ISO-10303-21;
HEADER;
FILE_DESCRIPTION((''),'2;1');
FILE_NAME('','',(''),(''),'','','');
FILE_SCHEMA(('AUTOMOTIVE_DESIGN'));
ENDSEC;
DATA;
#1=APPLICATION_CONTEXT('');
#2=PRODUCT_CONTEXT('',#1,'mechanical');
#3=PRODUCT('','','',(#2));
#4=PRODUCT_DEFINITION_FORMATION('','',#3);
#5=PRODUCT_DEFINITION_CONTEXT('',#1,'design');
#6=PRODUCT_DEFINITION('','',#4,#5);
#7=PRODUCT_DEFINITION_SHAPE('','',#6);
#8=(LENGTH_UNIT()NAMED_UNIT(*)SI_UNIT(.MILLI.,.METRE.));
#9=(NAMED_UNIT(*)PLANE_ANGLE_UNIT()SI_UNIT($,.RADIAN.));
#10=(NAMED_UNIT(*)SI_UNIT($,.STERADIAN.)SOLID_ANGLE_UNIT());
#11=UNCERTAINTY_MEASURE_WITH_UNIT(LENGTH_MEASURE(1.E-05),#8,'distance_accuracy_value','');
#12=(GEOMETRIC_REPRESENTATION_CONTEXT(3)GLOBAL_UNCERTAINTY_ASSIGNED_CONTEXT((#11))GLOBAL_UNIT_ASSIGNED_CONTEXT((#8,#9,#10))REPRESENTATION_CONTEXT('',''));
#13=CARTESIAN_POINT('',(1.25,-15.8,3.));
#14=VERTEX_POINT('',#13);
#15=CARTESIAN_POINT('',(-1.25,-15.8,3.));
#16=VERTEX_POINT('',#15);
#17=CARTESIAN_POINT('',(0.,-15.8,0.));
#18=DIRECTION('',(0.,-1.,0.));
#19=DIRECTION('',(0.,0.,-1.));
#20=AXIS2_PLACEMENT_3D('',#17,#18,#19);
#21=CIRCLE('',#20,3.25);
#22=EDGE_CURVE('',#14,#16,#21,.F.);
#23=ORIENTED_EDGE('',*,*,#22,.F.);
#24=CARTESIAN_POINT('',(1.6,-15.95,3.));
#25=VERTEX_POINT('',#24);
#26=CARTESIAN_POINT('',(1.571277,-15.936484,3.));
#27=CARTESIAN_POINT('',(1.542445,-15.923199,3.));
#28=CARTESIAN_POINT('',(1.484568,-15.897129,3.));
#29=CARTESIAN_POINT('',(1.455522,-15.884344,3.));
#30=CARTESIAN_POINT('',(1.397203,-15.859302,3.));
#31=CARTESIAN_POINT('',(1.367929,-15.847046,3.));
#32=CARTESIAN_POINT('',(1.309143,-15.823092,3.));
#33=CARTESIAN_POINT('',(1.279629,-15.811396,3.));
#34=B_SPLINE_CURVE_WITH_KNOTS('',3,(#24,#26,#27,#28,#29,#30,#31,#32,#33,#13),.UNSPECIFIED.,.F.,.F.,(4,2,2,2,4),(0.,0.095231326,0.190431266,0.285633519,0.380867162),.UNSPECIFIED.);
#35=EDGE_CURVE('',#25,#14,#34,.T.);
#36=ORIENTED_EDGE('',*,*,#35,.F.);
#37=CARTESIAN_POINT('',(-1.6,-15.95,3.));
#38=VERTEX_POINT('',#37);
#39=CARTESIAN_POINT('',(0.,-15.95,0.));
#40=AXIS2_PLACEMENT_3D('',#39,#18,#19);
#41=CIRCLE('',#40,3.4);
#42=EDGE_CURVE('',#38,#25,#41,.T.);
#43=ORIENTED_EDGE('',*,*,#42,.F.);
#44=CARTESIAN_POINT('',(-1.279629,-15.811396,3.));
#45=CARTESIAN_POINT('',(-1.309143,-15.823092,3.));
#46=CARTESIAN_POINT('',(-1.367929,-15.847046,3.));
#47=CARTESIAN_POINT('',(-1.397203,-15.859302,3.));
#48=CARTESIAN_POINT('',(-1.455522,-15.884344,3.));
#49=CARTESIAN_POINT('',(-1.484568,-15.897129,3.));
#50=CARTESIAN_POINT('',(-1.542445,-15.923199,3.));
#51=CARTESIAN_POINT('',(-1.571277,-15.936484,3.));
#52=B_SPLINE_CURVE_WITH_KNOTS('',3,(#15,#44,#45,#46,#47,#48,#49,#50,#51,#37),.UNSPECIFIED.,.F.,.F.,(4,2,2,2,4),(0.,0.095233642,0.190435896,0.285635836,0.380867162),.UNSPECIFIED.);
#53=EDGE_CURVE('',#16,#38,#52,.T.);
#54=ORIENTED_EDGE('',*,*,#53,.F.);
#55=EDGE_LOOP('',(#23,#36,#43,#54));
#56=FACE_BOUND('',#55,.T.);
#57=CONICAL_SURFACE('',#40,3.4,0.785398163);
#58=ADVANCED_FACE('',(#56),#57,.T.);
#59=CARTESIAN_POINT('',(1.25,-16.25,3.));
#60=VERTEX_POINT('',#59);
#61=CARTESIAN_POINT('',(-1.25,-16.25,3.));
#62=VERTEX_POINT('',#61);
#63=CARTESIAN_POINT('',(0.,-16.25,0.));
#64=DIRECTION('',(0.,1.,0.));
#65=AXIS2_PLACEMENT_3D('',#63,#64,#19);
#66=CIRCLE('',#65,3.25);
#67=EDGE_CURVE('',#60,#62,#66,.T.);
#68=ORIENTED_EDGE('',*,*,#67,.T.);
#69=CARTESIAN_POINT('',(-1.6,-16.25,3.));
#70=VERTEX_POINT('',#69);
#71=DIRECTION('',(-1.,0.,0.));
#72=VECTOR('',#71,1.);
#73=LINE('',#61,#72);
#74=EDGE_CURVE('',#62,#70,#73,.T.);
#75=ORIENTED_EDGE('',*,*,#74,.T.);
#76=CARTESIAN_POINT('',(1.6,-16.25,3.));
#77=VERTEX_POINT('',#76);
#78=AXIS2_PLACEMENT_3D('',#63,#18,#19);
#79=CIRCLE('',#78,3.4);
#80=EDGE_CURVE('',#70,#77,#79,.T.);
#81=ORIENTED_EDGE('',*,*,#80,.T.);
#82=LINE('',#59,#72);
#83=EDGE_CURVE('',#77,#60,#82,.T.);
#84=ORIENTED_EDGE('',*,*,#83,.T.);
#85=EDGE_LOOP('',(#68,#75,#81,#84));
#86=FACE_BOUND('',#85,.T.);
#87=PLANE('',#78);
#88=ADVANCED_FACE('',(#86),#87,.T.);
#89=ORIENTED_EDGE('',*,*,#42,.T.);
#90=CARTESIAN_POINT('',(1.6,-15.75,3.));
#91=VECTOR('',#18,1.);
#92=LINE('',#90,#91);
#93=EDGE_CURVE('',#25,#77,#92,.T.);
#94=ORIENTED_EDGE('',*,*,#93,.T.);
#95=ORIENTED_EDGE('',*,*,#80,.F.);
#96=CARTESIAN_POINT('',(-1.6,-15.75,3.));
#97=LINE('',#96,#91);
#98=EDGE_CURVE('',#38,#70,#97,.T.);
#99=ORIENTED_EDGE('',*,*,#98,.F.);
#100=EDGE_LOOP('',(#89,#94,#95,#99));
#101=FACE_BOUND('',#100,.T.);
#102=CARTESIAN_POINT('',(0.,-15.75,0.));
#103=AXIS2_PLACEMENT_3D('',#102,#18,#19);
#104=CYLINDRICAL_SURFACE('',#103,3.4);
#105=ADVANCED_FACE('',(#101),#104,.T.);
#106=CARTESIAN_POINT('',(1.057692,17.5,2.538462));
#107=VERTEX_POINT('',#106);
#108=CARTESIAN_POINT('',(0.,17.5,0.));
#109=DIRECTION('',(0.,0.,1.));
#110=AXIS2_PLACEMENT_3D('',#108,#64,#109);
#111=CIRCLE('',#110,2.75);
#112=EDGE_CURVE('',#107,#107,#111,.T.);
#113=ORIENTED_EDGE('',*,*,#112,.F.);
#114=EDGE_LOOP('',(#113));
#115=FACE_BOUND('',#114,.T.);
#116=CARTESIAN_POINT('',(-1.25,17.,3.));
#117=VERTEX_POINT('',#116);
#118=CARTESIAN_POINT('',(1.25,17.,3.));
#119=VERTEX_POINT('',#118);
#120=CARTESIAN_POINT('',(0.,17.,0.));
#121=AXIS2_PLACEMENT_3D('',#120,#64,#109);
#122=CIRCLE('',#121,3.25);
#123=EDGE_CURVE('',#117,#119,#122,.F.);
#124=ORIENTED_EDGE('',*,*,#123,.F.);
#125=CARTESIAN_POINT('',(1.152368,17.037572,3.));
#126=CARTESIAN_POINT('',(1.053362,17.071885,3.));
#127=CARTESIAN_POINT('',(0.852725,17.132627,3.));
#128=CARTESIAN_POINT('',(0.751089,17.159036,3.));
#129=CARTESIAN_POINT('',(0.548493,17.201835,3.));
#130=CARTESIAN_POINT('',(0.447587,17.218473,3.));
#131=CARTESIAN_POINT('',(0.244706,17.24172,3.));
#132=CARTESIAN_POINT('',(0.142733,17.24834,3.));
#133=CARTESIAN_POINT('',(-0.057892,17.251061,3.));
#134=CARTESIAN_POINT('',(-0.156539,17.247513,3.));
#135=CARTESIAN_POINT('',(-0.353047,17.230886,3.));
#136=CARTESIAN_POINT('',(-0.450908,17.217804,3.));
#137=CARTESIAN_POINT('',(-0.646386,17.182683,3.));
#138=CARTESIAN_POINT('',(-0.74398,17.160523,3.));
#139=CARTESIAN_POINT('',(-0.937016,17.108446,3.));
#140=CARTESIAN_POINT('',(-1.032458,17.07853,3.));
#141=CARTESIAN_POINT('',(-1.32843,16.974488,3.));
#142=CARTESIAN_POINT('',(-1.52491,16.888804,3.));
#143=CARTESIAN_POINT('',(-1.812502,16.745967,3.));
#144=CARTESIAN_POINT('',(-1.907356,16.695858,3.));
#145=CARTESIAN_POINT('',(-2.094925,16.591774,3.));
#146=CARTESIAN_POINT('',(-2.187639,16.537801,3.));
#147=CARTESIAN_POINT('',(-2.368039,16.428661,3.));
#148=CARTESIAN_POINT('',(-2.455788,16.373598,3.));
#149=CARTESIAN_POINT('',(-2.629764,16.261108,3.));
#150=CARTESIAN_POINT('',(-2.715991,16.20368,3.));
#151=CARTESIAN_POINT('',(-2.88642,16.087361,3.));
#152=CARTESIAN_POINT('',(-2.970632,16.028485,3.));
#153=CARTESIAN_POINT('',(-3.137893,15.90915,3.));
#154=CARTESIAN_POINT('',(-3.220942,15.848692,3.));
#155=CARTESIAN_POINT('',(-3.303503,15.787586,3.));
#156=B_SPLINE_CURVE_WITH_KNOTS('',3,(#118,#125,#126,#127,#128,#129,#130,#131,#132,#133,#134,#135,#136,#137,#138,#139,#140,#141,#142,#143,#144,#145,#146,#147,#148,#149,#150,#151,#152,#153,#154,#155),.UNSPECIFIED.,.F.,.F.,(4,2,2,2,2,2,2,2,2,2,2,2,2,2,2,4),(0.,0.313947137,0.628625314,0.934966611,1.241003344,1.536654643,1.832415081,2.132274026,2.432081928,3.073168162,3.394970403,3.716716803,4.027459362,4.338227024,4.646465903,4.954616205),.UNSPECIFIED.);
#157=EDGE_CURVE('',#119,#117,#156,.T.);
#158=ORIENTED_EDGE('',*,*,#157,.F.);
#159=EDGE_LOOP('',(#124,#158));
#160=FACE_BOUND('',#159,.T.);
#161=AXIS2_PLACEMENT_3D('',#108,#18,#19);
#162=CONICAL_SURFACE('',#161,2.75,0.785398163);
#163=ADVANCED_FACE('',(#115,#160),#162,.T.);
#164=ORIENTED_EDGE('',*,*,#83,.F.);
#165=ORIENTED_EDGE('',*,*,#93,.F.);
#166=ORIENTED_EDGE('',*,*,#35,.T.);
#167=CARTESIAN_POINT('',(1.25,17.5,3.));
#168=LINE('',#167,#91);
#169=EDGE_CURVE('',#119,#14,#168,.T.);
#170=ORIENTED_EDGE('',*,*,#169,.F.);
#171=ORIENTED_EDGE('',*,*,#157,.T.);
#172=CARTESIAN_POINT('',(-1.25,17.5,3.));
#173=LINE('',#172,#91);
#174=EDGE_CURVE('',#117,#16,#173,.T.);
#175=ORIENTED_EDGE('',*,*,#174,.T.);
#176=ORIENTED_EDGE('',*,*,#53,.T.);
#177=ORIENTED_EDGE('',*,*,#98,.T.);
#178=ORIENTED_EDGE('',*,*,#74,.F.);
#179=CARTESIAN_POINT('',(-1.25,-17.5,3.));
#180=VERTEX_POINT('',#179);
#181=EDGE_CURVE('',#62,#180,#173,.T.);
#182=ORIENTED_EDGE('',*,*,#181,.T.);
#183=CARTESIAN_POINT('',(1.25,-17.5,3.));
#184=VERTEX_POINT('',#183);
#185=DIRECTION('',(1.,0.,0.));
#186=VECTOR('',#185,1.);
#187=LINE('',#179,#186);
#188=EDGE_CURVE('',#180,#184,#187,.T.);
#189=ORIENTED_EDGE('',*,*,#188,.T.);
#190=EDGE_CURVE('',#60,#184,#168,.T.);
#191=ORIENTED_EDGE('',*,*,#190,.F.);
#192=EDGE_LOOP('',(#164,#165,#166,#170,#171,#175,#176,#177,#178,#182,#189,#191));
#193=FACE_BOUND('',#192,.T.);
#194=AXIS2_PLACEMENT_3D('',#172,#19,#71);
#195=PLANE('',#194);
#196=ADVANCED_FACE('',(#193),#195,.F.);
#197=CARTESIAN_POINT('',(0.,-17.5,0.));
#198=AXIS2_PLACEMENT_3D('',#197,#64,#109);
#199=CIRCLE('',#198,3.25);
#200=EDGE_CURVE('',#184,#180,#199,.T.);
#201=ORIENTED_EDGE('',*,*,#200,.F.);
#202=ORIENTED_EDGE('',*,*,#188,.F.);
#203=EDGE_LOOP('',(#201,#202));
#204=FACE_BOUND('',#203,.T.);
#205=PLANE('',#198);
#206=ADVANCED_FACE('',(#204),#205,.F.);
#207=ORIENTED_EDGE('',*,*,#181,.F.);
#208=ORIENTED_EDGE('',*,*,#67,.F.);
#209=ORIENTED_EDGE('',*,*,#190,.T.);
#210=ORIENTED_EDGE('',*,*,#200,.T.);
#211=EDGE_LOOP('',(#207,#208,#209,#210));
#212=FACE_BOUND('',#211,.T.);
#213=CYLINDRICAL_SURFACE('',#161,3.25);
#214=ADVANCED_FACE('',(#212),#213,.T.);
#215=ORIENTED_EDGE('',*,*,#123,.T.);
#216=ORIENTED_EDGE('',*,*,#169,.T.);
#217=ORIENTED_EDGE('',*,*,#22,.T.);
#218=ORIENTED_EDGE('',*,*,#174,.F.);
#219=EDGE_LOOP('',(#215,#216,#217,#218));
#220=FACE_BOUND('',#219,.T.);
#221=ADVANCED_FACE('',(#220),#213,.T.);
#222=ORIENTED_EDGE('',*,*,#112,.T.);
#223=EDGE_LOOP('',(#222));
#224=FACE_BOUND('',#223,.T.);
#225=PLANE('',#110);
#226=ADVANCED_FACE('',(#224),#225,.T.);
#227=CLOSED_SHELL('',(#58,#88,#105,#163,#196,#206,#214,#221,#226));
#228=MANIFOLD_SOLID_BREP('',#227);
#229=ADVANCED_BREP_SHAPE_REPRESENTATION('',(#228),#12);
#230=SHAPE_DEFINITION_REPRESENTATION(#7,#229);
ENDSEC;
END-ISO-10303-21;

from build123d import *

# Parameters (mm, degrees)
BOSS_EXTRUDE1_DEPTH = 17.5
BOSS_EXTRUDE2_START = -1.75
BOSS_EXTRUDE2_DEPTH = 0.5
CHAMFER1_SIZE       = 0.2


with BuildPart() as part:
    # Sketch1 → Boss-Extrude1 (new, symmetric)
    with BuildSketch(Plane(origin=(0, 0, 0), x_dir=(1, 0, 0), z_dir=(0, 1, 0))):
        with BuildLine():
            Line((-1.25, -3), (1.25, -3))
            ThreePointArc((1.25, -3), (0, 3.25), (-1.25, -3))
        make_face()
    extrude(amount=BOSS_EXTRUDE1_DEPTH, both=True)

    # Sketch2 → Boss-Extrude2 (add)
    with BuildSketch(Plane.XZ.offset(17.5).offset(BOSS_EXTRUDE2_START)):
        with BuildLine():
            Line((-1.25, 3), (-1.6, 3))
            ThreePointArc((-1.6, 3), (0, -3.4), (1.6, 3))
            Line((1.6, 3), (1.25, 3))
            ThreePointArc((1.25, 3), (0, -3.25), (-1.25, 3))
        make_face()
    extrude(amount=BOSS_EXTRUDE2_DEPTH)

    # Chamfer1
    # the kernel refuses this chamfer: 0.2 mm, written as the material it takes off along each edge
    with BuildSketch(Plane(origin=(0, -15.75, 0), x_dir=(-0.3315887986155938, 0, 0.9434240131736458), z_dir=(0.9434240131736458, 0, 0.3315887986155938))) as chamfer1_piece_1_section:
        Polygon((3.4, CHAMFER1_SIZE), (3.4 - CHAMFER1_SIZE, 0), (3.4, 0), align=None)
    chamfer1_piece_1 = revolve(axis=Axis((0, -15.75, 0), (0, -1, 0)), revolution_arc=321.269525005, mode=Mode.PRIVATE)
    chamfer1_piece_1 = chamfer1_piece_1 - Plane(origin=(0, -15.75, 0), x_dir=(0.38461538461538497, 0, 0.923076923076923), z_dir=(0, 1, 0)) * Cylinder(3.25, 14, mode=Mode.PRIVATE)
    add(chamfer1_piece_1, mode=Mode.SUBTRACT)

    # Chamfer2: read off the stored shape, not the designer's step
    # Chamfer2 outline → Chamfer2 (revolve, cut)
    with BuildSketch(Plane.XY):
        Polygon((3.25, 17.5), (2.75, 17.5), (3.25, 17), align=None)
    revolve(axis=Axis((0, 0, 0), (0, 1, 0)), mode=Mode.SUBTRACT)


solid = part.part
